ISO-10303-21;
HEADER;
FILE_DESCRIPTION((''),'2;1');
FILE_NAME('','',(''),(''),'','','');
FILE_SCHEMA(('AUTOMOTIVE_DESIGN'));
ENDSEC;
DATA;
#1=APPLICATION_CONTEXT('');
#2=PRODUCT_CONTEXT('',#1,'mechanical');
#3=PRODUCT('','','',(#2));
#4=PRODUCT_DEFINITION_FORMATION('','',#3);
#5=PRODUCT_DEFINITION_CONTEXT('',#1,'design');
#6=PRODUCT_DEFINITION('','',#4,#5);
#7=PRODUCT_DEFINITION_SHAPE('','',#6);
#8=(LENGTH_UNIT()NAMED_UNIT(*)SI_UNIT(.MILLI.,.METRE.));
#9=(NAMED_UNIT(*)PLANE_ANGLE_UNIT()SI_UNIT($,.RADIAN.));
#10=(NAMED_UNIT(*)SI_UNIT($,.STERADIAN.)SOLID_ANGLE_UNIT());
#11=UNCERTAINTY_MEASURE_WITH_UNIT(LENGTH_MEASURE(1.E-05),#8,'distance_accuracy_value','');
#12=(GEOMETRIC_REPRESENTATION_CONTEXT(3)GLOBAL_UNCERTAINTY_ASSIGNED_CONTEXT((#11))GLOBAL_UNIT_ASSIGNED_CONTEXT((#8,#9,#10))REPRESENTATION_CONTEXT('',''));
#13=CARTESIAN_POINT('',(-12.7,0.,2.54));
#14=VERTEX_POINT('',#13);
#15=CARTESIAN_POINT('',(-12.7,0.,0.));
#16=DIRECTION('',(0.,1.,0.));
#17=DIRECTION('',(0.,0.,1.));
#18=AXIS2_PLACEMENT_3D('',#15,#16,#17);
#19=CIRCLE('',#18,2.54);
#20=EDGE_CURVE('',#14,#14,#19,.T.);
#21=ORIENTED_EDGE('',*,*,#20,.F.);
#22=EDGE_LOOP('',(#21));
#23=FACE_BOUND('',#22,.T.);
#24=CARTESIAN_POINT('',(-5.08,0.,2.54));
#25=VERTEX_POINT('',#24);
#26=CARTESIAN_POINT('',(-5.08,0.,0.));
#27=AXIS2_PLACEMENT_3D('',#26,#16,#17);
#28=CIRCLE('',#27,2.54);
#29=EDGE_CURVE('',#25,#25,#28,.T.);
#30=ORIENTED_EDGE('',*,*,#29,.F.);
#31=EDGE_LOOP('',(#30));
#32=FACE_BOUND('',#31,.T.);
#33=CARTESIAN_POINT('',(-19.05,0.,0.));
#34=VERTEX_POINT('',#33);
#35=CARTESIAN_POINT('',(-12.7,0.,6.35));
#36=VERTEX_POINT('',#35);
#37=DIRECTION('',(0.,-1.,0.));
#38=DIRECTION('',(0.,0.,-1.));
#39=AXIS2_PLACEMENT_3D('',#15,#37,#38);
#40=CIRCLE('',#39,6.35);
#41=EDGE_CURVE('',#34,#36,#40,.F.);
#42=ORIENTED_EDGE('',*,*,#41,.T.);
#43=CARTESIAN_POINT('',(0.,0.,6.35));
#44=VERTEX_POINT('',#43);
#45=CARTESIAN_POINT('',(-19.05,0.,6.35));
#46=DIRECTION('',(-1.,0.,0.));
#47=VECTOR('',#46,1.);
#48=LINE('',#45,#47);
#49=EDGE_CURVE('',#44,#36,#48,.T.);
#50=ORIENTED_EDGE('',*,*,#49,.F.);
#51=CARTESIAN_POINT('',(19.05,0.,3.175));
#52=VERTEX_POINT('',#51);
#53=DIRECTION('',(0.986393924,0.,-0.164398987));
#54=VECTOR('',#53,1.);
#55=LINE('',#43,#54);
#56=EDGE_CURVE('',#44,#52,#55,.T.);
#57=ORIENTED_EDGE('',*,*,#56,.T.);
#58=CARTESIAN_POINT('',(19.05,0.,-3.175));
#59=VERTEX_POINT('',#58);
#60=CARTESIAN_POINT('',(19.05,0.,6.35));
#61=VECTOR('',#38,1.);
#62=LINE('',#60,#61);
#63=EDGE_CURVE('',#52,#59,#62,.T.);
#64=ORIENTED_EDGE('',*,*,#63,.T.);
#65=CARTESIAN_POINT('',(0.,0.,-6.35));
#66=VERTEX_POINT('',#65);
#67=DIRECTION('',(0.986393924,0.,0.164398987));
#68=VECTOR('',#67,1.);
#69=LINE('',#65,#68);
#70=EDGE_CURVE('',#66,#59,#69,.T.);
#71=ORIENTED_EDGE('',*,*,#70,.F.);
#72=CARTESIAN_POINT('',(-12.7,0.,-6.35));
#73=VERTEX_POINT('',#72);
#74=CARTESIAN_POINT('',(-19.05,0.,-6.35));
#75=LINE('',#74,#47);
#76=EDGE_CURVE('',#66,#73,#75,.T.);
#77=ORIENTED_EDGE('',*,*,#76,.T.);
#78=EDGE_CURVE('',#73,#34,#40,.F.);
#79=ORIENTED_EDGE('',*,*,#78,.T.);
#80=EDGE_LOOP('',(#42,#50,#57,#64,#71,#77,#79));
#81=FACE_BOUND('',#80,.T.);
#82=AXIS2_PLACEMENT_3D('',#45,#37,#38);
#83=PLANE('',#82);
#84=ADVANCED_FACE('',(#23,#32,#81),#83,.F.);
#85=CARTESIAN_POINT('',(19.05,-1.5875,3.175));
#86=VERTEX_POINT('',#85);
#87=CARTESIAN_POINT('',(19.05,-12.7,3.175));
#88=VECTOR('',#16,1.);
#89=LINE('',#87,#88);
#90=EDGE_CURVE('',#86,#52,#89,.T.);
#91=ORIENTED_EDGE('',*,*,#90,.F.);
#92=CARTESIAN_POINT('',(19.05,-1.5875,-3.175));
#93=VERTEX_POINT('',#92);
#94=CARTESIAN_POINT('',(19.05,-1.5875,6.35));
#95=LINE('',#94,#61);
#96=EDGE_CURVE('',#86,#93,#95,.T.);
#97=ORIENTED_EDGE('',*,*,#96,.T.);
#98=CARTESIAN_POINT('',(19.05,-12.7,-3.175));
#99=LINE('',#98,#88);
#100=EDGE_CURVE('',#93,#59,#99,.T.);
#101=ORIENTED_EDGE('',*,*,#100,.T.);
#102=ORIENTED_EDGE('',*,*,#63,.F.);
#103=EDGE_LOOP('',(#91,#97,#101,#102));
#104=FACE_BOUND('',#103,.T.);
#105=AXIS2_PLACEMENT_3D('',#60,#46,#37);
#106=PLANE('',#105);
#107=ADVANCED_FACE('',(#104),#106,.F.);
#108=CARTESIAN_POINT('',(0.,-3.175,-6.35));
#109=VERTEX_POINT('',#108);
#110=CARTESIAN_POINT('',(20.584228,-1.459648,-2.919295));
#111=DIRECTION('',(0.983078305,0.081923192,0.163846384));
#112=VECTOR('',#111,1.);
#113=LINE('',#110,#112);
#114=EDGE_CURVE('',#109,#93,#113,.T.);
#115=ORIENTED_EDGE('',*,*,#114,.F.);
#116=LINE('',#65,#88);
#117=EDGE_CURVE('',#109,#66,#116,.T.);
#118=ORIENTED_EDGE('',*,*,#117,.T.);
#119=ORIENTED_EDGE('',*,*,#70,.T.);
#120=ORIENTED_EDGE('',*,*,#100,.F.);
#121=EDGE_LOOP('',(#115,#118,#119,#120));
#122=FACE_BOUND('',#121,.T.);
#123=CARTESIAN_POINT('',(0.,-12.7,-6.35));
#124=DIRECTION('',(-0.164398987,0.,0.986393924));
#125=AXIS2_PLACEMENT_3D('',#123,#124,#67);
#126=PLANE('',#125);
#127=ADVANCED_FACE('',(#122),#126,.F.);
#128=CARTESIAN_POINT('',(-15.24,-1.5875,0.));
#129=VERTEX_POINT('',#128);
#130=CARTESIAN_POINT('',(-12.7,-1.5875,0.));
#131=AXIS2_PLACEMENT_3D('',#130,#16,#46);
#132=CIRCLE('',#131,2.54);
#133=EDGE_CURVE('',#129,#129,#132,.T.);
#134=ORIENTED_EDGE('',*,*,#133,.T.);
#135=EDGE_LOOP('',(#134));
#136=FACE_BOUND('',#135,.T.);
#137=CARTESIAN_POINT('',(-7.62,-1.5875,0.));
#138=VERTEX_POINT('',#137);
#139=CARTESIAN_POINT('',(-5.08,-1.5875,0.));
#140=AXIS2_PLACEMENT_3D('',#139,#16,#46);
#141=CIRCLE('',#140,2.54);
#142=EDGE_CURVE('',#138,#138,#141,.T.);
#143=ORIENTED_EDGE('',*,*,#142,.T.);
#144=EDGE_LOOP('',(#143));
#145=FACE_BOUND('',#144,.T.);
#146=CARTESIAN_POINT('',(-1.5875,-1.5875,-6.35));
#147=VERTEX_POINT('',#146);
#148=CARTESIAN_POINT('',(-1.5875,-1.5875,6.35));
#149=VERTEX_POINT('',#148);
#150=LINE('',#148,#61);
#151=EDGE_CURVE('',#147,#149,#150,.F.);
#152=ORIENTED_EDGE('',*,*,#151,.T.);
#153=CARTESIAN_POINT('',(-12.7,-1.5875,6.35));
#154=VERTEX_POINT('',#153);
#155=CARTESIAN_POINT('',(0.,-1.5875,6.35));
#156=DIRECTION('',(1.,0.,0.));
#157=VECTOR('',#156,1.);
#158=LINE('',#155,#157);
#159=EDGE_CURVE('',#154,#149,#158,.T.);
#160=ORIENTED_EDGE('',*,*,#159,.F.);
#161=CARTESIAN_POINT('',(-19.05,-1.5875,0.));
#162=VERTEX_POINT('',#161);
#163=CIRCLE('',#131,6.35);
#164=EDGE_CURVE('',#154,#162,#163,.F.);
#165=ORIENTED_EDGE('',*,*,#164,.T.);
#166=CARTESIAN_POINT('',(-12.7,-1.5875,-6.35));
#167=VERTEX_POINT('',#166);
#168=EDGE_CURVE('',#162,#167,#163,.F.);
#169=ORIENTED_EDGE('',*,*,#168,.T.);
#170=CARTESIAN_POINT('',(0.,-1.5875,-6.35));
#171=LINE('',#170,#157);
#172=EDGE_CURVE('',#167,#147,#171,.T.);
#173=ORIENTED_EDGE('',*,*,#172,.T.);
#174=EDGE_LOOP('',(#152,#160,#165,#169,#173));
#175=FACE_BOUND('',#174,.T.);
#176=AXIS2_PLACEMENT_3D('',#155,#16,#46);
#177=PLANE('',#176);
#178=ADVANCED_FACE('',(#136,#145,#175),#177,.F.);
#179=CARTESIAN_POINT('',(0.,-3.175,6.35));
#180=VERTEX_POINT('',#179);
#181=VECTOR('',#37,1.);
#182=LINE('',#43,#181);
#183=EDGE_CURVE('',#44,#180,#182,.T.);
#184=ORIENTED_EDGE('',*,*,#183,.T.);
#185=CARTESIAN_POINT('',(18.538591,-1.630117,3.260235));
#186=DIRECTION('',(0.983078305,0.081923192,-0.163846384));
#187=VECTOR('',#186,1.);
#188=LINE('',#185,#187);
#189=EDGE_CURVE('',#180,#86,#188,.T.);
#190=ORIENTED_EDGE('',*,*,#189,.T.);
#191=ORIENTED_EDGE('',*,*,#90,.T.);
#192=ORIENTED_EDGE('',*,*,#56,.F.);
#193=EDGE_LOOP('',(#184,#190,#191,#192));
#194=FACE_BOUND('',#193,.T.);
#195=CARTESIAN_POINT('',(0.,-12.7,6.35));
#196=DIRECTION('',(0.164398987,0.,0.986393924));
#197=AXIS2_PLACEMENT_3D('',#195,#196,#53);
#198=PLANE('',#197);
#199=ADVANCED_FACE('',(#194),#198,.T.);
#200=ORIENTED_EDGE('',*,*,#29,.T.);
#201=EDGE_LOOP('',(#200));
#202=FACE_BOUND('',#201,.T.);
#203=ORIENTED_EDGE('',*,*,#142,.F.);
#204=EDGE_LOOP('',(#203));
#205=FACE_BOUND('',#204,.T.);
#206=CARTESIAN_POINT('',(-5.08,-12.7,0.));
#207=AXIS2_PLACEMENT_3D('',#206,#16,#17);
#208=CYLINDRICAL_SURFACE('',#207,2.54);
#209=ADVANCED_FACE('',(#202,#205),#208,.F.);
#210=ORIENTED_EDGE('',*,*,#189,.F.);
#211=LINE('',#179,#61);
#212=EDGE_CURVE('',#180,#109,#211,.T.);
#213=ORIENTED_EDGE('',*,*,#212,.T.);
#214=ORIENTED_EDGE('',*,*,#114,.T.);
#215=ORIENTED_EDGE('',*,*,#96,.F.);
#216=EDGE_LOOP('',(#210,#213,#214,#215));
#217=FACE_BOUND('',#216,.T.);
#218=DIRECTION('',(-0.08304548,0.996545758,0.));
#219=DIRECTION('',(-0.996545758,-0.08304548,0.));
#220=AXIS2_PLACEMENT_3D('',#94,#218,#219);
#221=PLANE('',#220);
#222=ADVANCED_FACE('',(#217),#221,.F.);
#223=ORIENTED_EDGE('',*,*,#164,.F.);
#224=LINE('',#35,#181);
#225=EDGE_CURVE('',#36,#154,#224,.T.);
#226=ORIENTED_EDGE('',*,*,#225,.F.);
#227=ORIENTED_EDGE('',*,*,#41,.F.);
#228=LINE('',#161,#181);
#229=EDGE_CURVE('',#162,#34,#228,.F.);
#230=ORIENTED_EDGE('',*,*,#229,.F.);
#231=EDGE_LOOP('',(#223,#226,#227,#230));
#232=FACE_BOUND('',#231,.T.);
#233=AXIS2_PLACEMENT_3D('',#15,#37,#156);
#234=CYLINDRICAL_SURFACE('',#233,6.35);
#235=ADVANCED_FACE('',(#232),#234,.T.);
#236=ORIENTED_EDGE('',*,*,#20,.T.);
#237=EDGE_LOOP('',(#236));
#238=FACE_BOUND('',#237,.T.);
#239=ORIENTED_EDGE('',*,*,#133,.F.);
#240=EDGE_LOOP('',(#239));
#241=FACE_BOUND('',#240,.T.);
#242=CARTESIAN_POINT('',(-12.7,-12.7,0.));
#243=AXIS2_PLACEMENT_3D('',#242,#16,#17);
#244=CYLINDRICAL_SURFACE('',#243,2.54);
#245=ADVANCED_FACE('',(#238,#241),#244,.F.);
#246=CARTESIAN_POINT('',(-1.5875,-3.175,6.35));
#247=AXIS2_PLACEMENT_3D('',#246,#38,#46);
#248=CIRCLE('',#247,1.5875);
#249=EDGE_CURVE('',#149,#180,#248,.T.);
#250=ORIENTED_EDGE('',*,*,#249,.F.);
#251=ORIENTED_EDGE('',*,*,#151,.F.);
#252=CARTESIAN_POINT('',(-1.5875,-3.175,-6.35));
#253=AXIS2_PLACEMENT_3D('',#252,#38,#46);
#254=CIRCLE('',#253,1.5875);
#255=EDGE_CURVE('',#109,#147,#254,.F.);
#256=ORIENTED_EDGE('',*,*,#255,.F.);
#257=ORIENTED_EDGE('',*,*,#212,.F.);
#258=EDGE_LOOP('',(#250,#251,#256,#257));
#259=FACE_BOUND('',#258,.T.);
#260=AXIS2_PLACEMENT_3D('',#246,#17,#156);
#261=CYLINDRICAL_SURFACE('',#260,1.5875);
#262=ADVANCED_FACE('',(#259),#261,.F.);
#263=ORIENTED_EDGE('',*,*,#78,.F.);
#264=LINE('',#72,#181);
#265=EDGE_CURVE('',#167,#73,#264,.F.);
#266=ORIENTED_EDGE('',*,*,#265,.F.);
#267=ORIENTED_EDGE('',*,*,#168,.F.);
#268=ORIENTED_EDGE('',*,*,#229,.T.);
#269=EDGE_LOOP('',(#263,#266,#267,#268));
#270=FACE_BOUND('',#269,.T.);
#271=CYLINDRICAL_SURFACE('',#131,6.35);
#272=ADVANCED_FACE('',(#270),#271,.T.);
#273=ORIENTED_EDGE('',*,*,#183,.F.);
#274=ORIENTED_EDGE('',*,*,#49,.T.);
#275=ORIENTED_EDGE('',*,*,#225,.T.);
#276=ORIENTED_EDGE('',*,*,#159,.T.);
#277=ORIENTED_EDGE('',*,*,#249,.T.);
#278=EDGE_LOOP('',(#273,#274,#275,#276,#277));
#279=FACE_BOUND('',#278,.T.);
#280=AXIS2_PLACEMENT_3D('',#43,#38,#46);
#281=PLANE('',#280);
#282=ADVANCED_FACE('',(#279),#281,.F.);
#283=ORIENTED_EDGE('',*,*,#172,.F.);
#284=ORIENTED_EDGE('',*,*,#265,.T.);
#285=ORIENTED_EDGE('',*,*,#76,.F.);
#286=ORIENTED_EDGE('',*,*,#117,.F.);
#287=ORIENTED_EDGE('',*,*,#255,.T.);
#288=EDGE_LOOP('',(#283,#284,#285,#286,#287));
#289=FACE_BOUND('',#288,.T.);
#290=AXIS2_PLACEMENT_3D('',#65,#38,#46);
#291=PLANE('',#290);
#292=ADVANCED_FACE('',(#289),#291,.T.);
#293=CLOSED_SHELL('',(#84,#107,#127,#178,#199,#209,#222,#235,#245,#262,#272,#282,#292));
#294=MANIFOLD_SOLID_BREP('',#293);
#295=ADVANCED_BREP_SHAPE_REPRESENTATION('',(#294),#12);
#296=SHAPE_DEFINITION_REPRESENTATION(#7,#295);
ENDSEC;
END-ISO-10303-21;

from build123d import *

# Parameters (mm, degrees)
BOSS_EXTRUDE1_DEPTH = 6.35
CUT_EXTRUDE1_DEPTH  = 12.7
FILLET1_R           = 6.35
FILLET2_R           = 1.5875
SKETCH3_R           = 2.54
CUT_EXTRUDE2_DEPTH  = 12.7


with BuildPart() as part:
    # Sketch1 → Boss-Extrude1 (new, symmetric)
    with BuildSketch(Plane.XY):
        Polygon((-19.05, 0), (19.05, 0), (19.05, -1.5875), (0, -3.175), (0, -1.5875), (-19.05, -1.5875), align=None)
    extrude(amount=BOSS_EXTRUDE1_DEPTH, both=True)

    # Sketch2 → Cut-Extrude1 (cut)
    with BuildSketch(Plane(origin=(0, 0, 0), x_dir=(1, 0, 0), z_dir=(0, 1, 0))):
        Polygon((0, 6.35), (19.05, 3.175), (19.05, 6.35), align=None)
    cut_extrude1 = extrude(amount=-CUT_EXTRUDE1_DEPTH, mode=Mode.SUBTRACT)

    # Mirror1: Cut-Extrude1 across plane
    add(cut_extrude1.mirror(Plane.XY), mode=Mode.SUBTRACT)

    # Fillet1
    fillet1_edges = [part.edges().sort_by_distance(p)[0] for p in [
        (-19.05, -0.79375, -6.35),
        (-19.05, -0.79375, 6.35),
    ]]
    fillet(fillet1_edges, radius=FILLET1_R - 0.0001)  # a hair under: the kernel refuses the full size

    # Fillet2
    fillet2_edges = [part.edges().sort_by_distance(p)[0] for p in [
        (0, -1.5875, 0),
    ]]
    fillet(fillet2_edges, radius=FILLET2_R - 0.0001)  # a hair under: the kernel refuses the full size

    # Sketch3 → Cut-Extrude2 (cut)
    with BuildSketch(Plane(origin=(0, 0, 0), x_dir=(1, 0, 0), z_dir=(0, 1, 0))):
        with Locations(Location((-12.7, 0, 0), (0, 0, 270))):
            Circle(SKETCH3_R)
        with Locations(Location((-5.08, 0, 0), (0, 0, 270))):
            Circle(SKETCH3_R)
    extrude(amount=-CUT_EXTRUDE2_DEPTH, mode=Mode.SUBTRACT)


solid = part.part
